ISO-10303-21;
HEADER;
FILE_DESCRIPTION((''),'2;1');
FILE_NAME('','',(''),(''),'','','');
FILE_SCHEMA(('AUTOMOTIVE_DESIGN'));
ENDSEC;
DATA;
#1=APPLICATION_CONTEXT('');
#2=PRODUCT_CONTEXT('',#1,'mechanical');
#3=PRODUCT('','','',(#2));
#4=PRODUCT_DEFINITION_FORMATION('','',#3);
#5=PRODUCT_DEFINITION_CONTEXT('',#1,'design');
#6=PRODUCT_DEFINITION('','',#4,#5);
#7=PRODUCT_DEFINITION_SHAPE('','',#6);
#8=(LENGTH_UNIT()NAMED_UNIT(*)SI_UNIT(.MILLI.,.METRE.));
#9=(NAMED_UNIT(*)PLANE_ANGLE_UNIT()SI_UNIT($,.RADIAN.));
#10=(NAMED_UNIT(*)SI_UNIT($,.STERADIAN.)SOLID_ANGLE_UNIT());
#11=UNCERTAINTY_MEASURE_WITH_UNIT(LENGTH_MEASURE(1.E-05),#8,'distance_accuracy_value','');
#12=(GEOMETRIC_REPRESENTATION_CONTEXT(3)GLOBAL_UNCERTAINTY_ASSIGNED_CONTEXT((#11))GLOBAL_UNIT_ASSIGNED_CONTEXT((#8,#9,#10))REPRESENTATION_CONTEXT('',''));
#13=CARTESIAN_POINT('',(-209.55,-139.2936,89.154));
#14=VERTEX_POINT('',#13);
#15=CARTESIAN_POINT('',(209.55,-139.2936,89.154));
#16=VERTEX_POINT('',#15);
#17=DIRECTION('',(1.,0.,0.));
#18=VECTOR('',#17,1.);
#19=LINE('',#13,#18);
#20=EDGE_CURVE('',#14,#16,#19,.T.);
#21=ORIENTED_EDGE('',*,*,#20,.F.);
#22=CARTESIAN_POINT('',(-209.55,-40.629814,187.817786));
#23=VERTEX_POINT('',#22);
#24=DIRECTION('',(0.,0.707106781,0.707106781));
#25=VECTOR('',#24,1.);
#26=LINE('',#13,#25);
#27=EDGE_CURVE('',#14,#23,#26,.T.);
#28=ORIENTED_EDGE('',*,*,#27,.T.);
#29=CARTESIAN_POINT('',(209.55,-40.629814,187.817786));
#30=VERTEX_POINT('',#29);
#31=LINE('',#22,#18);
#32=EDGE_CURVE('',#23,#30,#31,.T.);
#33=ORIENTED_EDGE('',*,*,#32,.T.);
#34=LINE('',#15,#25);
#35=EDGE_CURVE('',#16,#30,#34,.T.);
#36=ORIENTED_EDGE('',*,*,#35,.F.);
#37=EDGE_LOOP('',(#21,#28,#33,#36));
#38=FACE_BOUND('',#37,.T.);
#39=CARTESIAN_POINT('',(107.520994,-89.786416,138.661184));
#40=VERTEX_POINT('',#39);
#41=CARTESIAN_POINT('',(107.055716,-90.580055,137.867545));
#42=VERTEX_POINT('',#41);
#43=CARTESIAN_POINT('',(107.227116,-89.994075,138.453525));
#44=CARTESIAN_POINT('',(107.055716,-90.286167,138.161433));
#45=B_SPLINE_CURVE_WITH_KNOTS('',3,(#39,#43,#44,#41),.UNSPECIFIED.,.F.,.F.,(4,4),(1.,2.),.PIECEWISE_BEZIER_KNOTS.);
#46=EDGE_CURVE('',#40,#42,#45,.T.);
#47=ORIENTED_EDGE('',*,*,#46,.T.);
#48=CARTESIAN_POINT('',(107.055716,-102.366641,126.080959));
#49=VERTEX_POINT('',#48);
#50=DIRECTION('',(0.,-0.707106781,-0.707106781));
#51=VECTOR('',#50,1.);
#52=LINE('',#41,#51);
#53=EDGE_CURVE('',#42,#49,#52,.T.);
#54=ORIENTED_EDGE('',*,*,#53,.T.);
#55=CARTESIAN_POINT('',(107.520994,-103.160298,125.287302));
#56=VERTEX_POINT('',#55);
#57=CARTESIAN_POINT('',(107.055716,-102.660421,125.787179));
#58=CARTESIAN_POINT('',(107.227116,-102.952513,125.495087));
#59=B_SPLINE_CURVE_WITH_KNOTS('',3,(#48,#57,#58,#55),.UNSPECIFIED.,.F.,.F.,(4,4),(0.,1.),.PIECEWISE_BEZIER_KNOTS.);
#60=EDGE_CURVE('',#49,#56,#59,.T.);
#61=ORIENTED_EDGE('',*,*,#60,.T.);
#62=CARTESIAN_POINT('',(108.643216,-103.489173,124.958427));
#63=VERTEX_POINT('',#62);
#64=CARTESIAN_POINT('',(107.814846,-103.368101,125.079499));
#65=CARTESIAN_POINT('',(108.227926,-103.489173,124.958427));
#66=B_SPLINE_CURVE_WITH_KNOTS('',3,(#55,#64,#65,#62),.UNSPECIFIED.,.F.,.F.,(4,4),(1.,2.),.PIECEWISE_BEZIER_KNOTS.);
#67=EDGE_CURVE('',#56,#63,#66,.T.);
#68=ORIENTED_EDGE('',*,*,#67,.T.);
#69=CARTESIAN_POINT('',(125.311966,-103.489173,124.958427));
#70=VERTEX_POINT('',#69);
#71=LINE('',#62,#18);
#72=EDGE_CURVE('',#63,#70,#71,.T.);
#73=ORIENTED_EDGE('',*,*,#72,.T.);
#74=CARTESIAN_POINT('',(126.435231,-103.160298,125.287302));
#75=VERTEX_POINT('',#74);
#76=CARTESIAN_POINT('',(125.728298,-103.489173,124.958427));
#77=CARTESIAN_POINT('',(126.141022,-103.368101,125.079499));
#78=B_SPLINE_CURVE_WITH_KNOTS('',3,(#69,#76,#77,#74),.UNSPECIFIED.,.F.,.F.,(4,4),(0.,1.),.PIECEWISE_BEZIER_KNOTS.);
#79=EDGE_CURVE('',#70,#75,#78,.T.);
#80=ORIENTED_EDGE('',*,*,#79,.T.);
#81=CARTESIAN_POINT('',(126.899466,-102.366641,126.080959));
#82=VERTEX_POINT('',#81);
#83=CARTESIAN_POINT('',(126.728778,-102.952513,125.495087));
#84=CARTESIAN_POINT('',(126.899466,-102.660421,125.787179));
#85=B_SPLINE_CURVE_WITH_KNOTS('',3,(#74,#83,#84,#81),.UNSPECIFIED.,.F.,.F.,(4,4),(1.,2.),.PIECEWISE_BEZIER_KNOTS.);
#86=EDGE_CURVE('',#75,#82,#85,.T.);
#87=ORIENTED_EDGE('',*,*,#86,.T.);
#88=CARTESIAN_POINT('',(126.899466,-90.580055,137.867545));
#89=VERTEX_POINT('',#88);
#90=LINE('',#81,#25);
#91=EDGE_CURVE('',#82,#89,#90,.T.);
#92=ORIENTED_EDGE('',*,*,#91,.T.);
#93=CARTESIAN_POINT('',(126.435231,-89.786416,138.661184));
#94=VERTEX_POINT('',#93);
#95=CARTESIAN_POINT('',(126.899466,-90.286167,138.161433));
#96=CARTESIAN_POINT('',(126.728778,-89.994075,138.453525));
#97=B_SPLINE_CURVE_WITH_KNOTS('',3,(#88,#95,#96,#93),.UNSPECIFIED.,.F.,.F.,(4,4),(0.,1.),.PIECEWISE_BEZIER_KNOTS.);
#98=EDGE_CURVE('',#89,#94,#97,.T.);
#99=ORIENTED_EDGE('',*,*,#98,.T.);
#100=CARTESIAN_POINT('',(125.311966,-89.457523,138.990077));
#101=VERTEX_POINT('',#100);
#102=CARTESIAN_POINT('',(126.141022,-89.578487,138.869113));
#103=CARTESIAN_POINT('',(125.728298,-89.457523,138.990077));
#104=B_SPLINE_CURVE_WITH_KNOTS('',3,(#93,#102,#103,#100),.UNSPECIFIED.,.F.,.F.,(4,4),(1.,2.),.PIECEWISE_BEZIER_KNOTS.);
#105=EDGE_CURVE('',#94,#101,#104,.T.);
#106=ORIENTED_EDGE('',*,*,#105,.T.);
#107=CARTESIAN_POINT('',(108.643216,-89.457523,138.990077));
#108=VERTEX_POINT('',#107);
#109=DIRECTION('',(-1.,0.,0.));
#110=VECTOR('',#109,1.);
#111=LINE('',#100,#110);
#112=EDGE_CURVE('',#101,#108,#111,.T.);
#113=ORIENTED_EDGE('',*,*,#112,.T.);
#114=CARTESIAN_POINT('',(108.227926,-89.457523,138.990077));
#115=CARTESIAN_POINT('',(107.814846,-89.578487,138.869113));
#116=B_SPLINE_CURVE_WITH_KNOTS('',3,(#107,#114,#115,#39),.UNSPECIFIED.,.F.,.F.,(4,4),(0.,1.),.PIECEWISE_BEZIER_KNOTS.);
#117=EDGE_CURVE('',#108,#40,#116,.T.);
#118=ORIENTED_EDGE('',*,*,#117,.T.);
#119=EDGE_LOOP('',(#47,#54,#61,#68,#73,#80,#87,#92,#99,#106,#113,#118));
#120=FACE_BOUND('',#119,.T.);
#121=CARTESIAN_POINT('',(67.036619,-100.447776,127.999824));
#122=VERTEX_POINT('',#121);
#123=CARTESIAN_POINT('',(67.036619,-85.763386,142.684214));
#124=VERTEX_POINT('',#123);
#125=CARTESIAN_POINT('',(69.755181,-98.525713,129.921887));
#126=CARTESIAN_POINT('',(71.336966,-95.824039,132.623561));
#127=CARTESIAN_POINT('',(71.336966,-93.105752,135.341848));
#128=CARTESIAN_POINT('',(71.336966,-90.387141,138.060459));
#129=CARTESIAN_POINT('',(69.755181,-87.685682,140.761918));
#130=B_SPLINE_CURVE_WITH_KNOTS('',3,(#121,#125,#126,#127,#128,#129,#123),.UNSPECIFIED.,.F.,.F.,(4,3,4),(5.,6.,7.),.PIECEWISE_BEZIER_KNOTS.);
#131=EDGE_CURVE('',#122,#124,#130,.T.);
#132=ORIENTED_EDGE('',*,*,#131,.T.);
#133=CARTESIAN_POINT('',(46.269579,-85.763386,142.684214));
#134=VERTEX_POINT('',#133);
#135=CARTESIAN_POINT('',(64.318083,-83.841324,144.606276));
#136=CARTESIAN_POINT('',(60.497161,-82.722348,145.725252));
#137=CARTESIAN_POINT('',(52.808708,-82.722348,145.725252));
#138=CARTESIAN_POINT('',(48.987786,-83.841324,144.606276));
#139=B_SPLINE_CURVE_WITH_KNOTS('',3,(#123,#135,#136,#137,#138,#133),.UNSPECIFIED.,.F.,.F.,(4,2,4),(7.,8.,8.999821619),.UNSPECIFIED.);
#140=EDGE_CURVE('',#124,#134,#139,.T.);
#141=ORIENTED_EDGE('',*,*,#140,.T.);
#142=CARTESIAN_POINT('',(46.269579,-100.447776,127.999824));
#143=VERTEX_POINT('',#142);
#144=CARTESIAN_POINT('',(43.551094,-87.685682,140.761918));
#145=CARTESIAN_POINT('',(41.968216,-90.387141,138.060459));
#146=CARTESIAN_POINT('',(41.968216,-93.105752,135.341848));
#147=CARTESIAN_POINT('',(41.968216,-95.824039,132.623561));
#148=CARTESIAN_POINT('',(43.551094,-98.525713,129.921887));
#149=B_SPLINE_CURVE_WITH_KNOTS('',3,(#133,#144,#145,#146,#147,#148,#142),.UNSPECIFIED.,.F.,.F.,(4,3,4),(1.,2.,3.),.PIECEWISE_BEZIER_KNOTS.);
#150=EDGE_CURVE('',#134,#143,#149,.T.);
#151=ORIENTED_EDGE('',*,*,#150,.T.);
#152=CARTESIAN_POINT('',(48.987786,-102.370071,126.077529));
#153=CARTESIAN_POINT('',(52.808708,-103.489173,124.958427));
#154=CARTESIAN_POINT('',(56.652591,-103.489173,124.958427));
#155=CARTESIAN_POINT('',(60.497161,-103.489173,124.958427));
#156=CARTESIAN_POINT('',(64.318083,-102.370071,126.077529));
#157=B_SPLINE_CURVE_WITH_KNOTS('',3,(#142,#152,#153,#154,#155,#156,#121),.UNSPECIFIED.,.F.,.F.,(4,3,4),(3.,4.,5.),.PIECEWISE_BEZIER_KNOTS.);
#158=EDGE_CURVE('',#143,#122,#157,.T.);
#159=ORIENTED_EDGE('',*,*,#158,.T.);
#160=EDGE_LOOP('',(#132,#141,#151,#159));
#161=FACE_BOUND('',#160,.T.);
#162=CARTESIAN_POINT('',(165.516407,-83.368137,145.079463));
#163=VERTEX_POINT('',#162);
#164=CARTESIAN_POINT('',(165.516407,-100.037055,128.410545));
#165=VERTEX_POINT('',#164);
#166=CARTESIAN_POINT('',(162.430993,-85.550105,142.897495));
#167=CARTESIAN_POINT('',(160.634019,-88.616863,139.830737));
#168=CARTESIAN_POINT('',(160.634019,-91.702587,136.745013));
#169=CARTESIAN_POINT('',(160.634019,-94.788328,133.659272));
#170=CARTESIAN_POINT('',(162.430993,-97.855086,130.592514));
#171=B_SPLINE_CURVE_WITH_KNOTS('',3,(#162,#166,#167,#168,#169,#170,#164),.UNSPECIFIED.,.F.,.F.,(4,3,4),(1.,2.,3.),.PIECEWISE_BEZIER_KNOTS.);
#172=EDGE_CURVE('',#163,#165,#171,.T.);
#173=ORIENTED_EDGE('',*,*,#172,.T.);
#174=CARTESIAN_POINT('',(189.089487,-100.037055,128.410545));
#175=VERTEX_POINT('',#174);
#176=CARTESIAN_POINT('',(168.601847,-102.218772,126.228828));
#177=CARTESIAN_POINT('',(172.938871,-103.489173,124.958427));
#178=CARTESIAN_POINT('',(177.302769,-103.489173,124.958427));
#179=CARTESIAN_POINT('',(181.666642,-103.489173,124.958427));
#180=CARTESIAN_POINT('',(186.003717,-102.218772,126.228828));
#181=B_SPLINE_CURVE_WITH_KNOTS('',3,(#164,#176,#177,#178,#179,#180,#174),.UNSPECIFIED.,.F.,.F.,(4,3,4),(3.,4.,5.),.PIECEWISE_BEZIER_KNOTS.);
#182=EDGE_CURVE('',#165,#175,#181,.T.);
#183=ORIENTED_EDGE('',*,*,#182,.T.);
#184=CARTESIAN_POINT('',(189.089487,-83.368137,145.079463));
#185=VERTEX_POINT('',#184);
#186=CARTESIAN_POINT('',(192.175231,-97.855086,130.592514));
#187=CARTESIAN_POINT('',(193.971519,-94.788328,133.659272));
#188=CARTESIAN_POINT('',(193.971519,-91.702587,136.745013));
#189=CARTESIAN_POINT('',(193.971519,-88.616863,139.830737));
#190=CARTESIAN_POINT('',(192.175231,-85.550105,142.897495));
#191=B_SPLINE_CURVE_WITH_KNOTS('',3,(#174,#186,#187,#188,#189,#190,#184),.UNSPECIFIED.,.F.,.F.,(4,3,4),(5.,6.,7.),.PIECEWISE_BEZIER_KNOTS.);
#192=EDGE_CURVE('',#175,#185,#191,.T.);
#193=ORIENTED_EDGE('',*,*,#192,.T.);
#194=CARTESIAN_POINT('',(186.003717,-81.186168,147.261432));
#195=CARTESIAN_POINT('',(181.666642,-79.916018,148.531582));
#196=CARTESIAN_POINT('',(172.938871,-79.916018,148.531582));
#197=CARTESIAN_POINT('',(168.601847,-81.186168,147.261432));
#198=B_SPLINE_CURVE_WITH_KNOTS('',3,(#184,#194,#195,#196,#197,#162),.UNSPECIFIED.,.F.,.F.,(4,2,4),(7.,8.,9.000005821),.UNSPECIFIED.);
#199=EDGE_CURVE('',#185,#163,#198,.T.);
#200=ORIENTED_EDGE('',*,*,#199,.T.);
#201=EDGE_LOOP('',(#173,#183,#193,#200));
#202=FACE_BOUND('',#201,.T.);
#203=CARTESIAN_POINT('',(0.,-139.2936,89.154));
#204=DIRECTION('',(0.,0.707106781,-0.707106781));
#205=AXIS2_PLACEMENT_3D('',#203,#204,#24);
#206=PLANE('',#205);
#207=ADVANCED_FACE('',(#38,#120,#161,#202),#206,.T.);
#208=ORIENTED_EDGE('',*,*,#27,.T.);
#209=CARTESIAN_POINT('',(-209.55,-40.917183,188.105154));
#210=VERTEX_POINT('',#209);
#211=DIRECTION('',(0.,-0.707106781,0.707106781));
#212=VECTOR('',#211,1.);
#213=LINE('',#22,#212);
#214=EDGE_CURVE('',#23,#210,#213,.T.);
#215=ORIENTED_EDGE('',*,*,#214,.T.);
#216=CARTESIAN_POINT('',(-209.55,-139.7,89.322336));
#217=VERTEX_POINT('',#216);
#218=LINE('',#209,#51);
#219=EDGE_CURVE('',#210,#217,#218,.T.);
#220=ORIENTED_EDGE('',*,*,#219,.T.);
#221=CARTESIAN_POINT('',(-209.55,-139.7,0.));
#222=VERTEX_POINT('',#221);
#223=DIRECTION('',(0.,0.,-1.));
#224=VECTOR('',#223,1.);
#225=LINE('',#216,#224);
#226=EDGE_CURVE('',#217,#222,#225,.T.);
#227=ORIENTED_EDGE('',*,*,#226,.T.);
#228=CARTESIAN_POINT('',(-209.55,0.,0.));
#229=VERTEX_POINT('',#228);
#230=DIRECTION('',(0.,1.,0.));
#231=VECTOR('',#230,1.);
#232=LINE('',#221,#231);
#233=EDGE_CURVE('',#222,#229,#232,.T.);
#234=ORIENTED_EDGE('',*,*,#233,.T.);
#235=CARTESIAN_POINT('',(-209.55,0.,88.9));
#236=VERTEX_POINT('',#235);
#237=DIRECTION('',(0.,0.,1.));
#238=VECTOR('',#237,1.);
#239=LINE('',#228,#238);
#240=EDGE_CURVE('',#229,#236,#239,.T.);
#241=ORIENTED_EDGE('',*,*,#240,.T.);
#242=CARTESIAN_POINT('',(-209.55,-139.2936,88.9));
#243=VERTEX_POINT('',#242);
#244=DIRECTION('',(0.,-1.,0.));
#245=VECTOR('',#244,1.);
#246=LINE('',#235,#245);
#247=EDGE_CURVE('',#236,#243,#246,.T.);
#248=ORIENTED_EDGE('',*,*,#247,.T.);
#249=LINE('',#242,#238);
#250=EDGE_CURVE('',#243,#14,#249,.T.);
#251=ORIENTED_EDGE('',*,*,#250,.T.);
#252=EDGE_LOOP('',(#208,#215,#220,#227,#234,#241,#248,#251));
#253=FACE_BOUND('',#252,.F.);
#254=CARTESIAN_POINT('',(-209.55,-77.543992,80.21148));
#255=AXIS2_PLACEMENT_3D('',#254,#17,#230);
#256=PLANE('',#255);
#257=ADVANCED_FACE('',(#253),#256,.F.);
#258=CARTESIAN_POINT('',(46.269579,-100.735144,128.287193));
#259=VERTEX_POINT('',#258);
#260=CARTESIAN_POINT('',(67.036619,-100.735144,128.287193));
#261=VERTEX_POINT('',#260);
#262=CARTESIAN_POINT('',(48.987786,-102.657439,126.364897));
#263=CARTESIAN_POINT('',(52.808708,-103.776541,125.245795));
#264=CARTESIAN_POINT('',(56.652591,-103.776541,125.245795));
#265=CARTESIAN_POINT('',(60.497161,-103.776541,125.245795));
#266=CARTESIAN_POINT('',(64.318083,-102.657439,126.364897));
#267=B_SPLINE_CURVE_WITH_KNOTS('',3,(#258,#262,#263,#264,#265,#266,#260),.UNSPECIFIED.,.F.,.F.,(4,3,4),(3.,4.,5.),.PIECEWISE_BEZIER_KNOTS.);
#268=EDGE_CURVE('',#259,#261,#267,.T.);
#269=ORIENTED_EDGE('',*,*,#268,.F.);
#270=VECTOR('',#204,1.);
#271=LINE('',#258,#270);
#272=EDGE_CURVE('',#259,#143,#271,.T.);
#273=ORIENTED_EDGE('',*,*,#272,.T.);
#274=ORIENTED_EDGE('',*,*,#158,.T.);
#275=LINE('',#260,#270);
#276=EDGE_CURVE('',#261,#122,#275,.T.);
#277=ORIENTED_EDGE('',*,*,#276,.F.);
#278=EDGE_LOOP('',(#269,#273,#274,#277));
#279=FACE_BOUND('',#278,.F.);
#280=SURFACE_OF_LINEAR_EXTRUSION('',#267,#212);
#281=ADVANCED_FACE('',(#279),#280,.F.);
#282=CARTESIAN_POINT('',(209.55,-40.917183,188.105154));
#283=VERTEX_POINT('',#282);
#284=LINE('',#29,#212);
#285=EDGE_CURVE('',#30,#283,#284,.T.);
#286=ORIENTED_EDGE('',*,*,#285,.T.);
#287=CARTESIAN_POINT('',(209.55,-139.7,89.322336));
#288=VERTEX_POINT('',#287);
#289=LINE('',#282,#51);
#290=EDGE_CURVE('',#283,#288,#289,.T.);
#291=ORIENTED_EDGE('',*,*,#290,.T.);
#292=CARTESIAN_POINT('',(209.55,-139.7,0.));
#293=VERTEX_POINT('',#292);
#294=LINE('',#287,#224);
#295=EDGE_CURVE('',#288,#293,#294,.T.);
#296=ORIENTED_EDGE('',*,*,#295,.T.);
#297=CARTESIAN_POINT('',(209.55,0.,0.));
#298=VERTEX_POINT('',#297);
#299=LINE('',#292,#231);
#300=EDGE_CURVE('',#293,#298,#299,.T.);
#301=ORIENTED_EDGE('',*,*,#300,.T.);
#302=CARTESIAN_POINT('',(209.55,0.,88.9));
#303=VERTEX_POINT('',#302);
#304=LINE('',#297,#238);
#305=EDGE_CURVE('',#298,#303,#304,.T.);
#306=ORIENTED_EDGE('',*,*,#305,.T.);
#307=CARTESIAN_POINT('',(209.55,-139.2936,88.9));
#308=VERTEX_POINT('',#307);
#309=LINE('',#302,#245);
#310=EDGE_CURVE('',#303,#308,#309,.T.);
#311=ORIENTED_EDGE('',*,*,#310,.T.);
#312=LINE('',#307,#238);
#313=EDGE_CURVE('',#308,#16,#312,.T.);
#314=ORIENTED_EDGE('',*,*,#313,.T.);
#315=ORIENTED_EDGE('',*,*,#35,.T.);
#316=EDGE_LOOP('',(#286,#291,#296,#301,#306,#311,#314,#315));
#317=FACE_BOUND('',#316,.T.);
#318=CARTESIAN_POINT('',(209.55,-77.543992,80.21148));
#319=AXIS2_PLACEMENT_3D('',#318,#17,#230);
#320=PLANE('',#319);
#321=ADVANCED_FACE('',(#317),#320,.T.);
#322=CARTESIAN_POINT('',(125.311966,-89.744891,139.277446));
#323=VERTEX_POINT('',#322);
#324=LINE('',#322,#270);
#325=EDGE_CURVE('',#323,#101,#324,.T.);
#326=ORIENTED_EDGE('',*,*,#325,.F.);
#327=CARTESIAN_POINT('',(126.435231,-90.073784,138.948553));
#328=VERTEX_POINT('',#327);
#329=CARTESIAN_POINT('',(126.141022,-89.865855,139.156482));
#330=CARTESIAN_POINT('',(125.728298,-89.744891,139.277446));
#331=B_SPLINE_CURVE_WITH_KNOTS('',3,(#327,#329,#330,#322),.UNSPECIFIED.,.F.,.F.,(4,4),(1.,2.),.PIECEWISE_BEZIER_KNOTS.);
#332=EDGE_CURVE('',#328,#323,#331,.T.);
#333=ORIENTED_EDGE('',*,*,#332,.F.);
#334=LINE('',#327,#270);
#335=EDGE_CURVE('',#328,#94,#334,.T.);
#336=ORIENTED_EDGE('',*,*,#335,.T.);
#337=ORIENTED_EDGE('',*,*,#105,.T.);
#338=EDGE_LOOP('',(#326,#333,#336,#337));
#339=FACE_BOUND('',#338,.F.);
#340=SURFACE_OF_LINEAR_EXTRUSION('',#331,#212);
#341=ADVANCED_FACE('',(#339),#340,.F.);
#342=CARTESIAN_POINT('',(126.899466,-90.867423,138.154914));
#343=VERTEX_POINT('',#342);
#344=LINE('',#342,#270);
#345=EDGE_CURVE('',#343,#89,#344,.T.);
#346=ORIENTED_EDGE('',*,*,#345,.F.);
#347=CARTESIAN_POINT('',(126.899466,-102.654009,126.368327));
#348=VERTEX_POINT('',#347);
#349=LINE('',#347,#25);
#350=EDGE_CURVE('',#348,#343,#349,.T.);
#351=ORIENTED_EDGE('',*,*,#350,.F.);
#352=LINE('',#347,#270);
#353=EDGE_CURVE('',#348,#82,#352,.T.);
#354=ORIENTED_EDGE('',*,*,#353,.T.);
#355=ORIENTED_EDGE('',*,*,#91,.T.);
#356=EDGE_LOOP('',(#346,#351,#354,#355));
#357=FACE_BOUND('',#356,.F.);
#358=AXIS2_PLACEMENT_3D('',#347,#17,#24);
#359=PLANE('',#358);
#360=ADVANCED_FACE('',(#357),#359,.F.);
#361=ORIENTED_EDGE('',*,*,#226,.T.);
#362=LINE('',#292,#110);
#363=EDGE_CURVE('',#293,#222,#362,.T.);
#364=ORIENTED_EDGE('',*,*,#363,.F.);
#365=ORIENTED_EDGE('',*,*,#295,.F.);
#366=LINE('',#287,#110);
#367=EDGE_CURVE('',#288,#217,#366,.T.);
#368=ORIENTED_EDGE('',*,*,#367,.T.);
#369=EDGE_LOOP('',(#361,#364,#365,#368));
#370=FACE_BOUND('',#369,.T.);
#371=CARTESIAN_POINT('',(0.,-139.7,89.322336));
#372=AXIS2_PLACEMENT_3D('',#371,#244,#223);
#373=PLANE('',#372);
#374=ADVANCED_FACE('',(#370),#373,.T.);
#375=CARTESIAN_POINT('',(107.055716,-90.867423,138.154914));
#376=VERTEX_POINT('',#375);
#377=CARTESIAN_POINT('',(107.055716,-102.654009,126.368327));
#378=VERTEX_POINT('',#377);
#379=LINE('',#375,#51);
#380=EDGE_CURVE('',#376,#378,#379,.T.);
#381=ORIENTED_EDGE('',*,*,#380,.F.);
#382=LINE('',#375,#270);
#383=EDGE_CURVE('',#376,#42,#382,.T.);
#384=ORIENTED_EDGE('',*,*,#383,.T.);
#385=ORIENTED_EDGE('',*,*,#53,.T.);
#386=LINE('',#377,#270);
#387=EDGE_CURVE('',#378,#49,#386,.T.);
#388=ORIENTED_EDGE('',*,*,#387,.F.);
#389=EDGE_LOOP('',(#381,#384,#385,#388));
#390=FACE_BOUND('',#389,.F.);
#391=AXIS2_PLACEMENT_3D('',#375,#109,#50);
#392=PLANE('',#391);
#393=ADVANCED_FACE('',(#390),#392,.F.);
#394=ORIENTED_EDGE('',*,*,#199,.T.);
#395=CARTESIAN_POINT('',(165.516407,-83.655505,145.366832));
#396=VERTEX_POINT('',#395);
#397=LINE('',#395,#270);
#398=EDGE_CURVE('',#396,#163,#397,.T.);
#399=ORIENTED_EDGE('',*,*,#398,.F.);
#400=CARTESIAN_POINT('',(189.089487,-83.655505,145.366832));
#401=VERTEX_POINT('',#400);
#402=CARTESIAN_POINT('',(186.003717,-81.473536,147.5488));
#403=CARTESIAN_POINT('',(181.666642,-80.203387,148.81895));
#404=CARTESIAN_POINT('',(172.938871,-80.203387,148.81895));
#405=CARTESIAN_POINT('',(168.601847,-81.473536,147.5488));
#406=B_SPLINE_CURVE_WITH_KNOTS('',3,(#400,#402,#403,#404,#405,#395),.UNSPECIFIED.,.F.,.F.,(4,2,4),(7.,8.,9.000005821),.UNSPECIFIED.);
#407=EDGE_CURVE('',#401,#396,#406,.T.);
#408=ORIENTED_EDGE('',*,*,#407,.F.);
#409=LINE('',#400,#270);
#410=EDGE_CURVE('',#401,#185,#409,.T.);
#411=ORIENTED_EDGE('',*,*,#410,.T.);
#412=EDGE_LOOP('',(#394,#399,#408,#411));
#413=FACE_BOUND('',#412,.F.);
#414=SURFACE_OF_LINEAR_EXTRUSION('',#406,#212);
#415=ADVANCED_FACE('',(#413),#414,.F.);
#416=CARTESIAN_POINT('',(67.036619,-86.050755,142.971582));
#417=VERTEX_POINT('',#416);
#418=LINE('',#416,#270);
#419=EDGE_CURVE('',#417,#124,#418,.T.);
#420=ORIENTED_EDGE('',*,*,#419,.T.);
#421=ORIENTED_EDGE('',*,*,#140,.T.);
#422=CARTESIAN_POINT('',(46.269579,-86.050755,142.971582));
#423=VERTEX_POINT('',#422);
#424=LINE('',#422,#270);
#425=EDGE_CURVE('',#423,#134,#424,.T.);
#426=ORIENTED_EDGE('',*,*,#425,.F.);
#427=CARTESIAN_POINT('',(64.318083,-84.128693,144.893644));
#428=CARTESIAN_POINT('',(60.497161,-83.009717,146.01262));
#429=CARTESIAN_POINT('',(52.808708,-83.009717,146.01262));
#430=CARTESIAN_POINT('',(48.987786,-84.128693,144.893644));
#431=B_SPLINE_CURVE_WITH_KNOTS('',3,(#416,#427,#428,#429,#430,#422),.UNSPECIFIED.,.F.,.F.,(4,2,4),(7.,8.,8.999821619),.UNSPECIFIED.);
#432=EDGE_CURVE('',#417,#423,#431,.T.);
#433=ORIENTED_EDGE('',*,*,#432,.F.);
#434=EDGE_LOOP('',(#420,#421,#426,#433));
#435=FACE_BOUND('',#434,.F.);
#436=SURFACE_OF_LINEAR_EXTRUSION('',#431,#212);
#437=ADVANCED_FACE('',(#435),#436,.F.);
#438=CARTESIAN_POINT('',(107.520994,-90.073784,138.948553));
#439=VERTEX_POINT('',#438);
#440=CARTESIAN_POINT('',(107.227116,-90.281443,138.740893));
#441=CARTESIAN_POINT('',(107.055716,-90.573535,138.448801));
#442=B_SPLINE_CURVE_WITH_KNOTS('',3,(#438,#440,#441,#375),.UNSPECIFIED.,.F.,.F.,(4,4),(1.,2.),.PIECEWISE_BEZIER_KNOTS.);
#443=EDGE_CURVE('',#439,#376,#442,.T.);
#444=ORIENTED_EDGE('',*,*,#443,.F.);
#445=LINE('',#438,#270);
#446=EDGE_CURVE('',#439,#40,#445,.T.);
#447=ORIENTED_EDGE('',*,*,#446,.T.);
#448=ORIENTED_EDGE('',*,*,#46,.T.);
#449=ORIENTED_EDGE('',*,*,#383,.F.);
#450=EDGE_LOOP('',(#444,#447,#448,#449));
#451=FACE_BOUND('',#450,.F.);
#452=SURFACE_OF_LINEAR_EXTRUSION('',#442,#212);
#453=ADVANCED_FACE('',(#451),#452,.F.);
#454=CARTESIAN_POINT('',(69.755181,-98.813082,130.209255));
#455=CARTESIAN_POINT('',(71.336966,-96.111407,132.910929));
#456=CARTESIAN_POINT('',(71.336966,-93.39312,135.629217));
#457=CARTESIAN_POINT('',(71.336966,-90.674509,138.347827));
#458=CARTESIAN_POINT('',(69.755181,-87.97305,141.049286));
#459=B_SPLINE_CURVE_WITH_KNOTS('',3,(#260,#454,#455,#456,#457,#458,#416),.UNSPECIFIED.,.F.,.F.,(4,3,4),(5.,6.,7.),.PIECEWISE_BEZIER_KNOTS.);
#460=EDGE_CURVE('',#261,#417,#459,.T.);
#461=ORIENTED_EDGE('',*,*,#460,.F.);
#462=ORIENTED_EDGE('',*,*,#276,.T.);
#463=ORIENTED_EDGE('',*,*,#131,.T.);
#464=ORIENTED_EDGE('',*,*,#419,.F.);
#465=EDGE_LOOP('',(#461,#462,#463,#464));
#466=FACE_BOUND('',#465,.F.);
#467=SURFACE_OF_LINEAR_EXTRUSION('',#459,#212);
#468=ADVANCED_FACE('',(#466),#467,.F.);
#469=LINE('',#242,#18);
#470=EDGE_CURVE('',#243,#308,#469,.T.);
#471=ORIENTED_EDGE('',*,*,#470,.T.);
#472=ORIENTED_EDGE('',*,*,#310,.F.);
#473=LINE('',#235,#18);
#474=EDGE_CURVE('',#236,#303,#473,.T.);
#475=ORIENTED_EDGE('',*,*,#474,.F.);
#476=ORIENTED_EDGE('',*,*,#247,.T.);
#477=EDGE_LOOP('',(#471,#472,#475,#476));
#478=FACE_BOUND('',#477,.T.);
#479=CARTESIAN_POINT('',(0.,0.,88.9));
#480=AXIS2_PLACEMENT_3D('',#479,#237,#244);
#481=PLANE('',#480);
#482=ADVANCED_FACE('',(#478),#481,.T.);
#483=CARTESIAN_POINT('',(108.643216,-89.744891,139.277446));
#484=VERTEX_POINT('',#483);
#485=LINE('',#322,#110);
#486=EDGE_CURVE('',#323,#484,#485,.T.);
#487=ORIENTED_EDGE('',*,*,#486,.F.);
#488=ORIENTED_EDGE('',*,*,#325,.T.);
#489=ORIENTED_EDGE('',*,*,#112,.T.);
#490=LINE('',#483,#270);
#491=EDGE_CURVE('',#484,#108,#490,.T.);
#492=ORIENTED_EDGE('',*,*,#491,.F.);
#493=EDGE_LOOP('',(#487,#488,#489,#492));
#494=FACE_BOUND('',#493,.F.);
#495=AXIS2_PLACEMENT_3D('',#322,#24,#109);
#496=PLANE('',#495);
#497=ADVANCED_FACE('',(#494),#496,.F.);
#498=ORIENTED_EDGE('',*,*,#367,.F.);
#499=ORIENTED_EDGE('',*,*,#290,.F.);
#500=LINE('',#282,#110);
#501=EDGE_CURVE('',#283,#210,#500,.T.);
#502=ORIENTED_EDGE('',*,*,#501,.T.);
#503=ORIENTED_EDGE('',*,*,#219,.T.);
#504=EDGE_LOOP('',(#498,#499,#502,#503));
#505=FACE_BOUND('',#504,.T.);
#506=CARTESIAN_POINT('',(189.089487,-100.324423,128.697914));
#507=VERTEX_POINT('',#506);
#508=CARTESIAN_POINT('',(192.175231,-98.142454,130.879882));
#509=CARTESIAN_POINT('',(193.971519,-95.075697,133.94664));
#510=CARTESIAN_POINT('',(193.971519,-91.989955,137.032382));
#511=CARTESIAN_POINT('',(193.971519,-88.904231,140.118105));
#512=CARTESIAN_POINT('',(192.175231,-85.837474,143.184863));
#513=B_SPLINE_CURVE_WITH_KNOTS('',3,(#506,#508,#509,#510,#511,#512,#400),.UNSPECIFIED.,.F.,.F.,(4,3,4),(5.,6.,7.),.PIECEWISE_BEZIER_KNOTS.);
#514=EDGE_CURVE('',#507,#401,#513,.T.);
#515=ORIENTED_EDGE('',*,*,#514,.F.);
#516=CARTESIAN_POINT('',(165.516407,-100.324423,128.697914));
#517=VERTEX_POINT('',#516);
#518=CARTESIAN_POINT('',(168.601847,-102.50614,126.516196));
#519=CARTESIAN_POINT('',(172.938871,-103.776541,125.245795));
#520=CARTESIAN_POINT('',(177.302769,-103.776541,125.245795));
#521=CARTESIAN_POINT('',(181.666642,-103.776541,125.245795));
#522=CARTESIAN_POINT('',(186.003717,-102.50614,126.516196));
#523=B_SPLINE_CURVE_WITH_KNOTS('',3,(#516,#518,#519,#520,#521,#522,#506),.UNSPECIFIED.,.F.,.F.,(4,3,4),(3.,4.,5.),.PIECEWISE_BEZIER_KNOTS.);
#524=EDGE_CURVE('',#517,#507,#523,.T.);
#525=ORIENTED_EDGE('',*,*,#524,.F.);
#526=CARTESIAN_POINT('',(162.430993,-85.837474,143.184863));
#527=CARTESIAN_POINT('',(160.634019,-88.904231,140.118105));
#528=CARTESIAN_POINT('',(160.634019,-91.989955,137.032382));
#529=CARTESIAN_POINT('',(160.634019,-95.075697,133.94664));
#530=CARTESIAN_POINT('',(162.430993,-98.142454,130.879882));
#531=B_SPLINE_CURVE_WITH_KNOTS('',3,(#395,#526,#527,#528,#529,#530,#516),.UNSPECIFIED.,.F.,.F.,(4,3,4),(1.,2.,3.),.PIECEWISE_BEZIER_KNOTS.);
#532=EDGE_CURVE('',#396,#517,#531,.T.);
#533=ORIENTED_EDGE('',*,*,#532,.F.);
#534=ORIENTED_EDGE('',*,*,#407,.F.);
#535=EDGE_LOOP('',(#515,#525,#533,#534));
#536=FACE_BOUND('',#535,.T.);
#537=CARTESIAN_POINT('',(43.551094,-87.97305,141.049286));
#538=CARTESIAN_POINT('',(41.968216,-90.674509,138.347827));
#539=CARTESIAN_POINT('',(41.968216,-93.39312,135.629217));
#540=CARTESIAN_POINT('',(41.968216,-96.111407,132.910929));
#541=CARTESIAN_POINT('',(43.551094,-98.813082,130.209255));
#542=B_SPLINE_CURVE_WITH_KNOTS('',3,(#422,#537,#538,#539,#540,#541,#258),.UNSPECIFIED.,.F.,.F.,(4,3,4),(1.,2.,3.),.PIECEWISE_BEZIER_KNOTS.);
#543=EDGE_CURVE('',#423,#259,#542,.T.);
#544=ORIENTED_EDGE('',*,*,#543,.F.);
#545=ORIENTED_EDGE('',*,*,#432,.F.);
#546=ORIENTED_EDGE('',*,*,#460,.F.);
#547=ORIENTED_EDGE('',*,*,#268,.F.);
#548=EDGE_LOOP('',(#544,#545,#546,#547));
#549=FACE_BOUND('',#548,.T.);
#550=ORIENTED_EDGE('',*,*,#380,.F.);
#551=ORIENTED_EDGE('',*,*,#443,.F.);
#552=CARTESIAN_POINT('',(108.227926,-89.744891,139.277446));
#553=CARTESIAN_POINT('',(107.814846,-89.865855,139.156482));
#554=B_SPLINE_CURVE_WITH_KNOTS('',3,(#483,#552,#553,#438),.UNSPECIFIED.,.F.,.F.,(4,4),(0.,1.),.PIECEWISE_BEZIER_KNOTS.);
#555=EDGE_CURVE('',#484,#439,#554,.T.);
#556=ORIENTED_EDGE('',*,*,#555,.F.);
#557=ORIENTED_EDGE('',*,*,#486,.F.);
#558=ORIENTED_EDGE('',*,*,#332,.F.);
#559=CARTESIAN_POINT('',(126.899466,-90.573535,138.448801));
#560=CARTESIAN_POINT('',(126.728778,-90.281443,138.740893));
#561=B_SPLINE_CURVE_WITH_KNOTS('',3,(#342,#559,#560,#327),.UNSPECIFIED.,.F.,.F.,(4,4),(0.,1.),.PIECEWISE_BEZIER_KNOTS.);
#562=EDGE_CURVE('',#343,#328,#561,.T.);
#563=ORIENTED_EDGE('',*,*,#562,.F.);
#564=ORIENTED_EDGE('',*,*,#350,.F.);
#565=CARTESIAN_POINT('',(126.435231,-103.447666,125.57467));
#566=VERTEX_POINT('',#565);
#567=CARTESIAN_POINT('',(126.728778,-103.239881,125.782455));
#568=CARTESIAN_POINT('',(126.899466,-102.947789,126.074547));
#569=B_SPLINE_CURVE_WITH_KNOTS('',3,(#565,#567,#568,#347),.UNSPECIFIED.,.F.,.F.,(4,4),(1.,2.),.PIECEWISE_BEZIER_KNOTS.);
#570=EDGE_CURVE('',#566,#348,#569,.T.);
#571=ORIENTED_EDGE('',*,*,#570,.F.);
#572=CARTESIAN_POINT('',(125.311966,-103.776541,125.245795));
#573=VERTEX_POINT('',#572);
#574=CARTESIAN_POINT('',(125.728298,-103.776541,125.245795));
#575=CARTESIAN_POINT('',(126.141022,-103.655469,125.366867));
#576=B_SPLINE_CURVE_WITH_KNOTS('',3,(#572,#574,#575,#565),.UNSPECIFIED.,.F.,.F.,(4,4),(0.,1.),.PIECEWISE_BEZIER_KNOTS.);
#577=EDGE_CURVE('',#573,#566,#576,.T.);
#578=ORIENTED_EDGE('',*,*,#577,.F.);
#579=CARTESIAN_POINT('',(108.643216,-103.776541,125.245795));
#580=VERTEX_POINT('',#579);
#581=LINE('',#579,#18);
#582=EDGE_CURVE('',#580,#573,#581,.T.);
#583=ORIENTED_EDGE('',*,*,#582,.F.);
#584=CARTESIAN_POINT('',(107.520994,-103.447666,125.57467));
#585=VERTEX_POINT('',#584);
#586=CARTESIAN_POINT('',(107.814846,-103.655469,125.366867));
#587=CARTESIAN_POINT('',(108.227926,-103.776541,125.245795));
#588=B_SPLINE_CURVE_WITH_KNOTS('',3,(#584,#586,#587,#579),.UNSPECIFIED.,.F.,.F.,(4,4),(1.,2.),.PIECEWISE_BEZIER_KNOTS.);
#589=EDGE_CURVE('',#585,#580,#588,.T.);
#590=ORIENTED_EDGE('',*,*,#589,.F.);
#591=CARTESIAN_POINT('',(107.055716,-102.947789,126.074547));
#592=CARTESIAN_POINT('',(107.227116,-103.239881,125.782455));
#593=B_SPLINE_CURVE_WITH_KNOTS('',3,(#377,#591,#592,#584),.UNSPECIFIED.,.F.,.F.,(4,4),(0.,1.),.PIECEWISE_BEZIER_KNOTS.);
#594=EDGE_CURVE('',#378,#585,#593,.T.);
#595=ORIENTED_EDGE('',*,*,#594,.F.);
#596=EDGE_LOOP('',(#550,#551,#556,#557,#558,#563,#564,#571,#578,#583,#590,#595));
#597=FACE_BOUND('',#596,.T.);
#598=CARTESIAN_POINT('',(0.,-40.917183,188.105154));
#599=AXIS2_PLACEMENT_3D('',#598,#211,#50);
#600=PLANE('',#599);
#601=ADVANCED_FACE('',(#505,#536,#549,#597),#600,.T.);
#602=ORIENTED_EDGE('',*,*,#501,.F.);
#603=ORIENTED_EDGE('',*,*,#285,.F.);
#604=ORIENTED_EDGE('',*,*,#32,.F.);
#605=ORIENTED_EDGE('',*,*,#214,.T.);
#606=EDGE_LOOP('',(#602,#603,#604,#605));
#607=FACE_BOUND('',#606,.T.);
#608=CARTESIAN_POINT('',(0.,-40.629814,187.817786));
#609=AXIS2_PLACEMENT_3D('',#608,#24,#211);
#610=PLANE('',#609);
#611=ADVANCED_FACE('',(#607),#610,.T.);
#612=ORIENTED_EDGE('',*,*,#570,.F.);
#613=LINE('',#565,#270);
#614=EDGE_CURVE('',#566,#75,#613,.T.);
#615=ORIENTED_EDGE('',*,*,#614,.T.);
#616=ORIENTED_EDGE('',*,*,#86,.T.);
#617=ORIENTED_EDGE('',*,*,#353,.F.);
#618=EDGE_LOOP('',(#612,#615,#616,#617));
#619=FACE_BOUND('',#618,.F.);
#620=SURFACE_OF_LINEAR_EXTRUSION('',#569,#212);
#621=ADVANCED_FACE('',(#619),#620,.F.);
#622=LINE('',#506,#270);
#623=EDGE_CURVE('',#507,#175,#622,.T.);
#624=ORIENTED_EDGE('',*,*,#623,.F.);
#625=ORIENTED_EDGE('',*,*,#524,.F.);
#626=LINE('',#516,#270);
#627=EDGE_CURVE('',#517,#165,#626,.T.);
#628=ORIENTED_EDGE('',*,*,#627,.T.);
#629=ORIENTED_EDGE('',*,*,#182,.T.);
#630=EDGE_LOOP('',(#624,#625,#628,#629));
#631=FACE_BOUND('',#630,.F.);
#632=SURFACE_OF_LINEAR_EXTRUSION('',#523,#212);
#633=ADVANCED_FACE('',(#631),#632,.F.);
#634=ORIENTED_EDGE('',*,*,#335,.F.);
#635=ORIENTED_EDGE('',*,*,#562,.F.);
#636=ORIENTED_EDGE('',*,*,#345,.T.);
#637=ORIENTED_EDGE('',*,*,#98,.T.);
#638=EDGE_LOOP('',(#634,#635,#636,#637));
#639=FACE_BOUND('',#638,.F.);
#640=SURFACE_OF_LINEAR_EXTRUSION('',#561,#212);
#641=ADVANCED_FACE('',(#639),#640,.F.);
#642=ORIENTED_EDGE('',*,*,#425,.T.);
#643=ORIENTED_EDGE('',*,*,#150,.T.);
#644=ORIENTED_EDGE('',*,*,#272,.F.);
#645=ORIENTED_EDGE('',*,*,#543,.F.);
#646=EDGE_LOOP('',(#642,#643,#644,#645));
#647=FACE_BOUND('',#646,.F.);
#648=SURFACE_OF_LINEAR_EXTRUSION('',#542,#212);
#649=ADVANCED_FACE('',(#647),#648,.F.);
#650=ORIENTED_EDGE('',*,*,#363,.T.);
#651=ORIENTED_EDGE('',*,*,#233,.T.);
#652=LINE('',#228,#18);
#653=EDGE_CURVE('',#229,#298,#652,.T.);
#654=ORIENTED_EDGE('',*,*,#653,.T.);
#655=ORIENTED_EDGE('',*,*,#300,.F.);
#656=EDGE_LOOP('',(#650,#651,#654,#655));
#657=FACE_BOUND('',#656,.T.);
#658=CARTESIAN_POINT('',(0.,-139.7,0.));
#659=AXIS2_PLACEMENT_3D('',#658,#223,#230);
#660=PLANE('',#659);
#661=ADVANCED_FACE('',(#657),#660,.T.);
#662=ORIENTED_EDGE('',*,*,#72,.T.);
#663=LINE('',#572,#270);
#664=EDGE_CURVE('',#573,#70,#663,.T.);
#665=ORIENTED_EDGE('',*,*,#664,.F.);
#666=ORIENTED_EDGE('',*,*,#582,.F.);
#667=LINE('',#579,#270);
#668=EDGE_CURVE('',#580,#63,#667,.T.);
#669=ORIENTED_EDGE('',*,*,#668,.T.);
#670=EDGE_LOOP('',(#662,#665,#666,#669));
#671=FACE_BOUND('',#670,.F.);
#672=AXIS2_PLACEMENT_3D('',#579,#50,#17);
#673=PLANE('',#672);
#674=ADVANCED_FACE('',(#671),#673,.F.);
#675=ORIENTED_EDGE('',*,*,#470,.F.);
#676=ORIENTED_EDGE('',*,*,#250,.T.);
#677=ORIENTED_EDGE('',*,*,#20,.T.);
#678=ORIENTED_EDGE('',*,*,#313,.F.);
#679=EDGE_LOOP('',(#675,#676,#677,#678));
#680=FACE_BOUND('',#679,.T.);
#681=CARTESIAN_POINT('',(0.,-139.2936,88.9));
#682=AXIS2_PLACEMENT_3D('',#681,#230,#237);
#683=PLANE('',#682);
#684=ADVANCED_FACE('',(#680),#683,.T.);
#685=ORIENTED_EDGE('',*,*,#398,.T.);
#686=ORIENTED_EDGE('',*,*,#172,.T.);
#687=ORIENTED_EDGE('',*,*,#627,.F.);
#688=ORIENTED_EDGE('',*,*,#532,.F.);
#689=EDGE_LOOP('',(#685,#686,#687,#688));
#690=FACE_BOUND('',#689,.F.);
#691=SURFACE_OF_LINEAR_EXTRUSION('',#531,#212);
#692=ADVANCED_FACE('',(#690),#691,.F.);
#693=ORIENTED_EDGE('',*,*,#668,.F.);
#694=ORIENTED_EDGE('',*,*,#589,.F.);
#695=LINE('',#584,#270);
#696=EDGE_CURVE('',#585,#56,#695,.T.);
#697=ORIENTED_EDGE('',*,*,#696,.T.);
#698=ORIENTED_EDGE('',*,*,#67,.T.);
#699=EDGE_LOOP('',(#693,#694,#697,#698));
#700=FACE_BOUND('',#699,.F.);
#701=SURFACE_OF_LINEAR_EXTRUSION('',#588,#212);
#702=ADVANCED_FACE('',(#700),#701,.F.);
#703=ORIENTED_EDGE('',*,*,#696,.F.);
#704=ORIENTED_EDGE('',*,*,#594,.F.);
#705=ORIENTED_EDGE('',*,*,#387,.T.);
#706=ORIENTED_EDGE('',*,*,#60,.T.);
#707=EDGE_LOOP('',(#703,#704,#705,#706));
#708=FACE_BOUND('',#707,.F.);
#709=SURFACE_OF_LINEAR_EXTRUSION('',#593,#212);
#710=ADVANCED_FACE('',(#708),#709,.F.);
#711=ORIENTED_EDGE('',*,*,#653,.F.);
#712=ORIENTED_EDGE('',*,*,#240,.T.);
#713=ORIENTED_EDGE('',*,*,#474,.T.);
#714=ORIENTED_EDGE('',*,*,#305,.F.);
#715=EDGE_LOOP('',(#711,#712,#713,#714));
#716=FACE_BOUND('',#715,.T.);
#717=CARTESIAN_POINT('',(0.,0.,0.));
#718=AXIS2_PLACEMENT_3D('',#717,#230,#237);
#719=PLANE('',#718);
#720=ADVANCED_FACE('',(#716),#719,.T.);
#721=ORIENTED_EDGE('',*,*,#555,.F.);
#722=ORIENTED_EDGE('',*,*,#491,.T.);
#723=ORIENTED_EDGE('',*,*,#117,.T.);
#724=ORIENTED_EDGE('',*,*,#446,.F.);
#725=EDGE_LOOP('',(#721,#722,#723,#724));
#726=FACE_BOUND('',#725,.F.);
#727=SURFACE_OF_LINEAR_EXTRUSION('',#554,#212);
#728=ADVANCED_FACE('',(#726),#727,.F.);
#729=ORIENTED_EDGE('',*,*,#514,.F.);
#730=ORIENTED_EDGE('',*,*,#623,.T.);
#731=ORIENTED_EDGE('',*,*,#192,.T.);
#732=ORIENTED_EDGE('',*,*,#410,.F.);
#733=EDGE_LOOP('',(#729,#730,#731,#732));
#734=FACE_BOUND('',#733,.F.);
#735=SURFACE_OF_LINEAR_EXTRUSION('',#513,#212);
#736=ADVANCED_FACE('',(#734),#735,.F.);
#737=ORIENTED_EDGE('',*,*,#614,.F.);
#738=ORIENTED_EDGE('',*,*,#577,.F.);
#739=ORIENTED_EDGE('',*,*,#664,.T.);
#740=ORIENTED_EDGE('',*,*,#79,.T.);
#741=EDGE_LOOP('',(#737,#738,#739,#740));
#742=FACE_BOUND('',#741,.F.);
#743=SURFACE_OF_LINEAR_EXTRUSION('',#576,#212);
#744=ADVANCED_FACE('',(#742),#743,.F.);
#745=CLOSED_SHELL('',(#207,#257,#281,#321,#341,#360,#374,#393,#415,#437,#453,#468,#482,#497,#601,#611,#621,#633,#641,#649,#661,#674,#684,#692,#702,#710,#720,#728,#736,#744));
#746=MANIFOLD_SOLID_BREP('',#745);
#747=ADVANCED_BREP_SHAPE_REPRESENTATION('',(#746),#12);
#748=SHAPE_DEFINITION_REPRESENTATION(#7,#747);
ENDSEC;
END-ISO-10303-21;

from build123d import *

# Parameters (mm, degrees)
F1_DEPTH = 209.55
F3_DEPTH = 0.4064


# Not quite as in the source:
# - the dataset's text gives a spline's control points without its knots; the knots are read off the source's solid


with BuildPart() as f1:
    # F0 (on Right) → F1 (new body, symmetric)
    with BuildSketch(Plane.YZ):
        Polygon((-139.7, 0), (0, 0), (0, 88.9), (-139.2936, 88.9), (-139.2936, 89.154), (-40.6298144724, 187.8177855276), (-40.9171826682, 188.1051537235), (-139.7, 89.3223363917), align=None)
    extrude(amount=F1_DEPTH, both=True)

    # F2 (on face) → F3 (cut, through all)
    with BuildSketch(Plane(origin=(0, -114.5111681959, 114.5111681959), x_dir=(1, 0, 0), z_dir=(0, -0.7071067812, 0.7071067812))):
        with BuildLine():
            add(Edge.make_bspline(
                [(107.5209936486, 34.5596805655), (107.2271156486, 34.2660057655), (107.0557164486, 33.8529255655), (107.0557164486, 33.4373053655)],
                knots=[1, 1, 1, 1, 2, 2, 2, 2], degree=3))
            Line((107.0557164486, 33.4373053655), (107.0557164486, 16.7685553655))
            add(Edge.make_bspline(
                [(107.0557164486, 16.7685553655), (107.0557164486, 16.3530875655), (107.2271156486, 15.9400073655), (107.5209936486, 15.6461547655)],
                knots=[0, 0, 0, 0, 1, 1, 1, 1], degree=3))
            add(Edge.make_bspline(
                [(107.5209936486, 15.6461547655), (107.8148462486, 15.3522767655), (108.2279264486, 15.1810553655), (108.6432164486, 15.1810553655)],
                knots=[1, 1, 1, 1, 2, 2, 2, 2], degree=3))
            Line((108.6432164486, 15.1810553655), (125.3119664486, 15.1810553655))
            add(Edge.make_bspline(
                [(125.3119664486, 15.1810553655), (125.7282978486, 15.1810553655), (126.1410224486, 15.3522767655), (126.4352306486, 15.6461547655)],
                knots=[0, 0, 0, 0, 1, 1, 1, 1], degree=3))
            add(Edge.make_bspline(
                [(126.4352306486, 15.6461547655), (126.7287784486, 15.9400073655), (126.8994664486, 16.3530875655), (126.8994664486, 16.7685553655)],
                knots=[1, 1, 1, 1, 2, 2, 2, 2], degree=3))
            Line((126.8994664486, 16.7685553655), (126.8994664486, 33.4373053655))
            add(Edge.make_bspline(
                [(126.8994664486, 33.4373053655), (126.8994664486, 33.8529255655), (126.7287784486, 34.2660057655), (126.4352306486, 34.5596805655)],
                knots=[0, 0, 0, 0, 1, 1, 1, 1], degree=3))
            add(Edge.make_bspline(
                [(126.4352306486, 34.5596805655), (126.1410224486, 34.8537363655), (125.7282978486, 35.0248053655), (125.3119664486, 35.0248053655)],
                knots=[1, 1, 1, 1, 2, 2, 2, 2], degree=3))
            Line((125.3119664486, 35.0248053655), (108.6432164486, 35.0248053655))
            add(Edge.make_bspline(
                [(108.6432164486, 35.0248053655), (108.2279264486, 35.0248053655), (107.8148462486, 34.8537363655), (107.5209936486, 34.5596805655)],
                knots=[0, 0, 0, 0, 1, 1, 1, 1], degree=3))
        make_face()
        with BuildLine():
            add(Edge.make_bspline(
                [(67.0366194486, 40.2491027655), (64.3180828486, 42.9673091655), (60.4971608486, 44.5497799655), (56.6525914486, 44.5497799655)],
                knots=[7, 7, 7, 7, 8, 8, 8, 8], degree=3))
            add(Edge.make_bspline(
                [(56.6525914486, 44.5497799655), (52.8087078486, 44.5497799655), (48.9877858486, 42.9673091655), (46.2695794486, 40.2491027655)],
                knots=[0, 0, 0, 0, 1, 1, 1, 1], degree=3))
            add(Edge.make_bspline(
                [(46.2695794486, 40.2491027655), (43.5510936486, 37.5305661655), (41.9682164486, 33.7101267655), (41.9682164486, 29.8654303655), (41.9682164486, 26.0211911655), (43.5510936486, 22.2004469655), (46.2695794486, 19.4822405655)],
                knots=[1, 1, 1, 1, 2, 2, 2, 3, 3, 3, 3], degree=3))
            add(Edge.make_bspline(
                [(46.2695794486, 19.4822405655), (48.9877858486, 16.7637039655), (52.8087078486, 15.1810553655), (56.6525914486, 15.1810553655), (60.4971608486, 15.1810553655), (64.3180828486, 16.7637039655), (67.0366194486, 19.4822405655)],
                knots=[3, 3, 3, 3, 4, 4, 4, 5, 5, 5, 5], degree=3))
            add(Edge.make_bspline(
                [(67.0366194486, 19.4822405655), (69.7551814486, 22.2004469655), (71.3369664486, 26.0211911655), (71.3369664486, 29.8654303655), (71.3369664486, 33.7101267655), (69.7551814486, 37.5305661655), (67.0366194486, 40.2491027655)],
                knots=[5, 5, 5, 5, 6, 6, 6, 7, 7, 7, 7], degree=3))
        make_face()
        with BuildLine():
            add(Edge.make_bspline(
                [(189.0894868486, 43.6364975655), (186.0037170486, 46.7222673655), (181.6666416486, 48.5185299655), (177.3027692486, 48.5185299655)],
                knots=[7, 7, 7, 7, 8, 8, 8, 8], degree=3))
            add(Edge.make_bspline(
                [(177.3027692486, 48.5185299655), (172.9388714486, 48.5185299655), (168.6018468486, 46.7222673655), (165.5164072486, 43.6364975655)],
                knots=[0, 0, 0, 0, 1, 1, 1, 1], degree=3))
            add(Edge.make_bspline(
                [(165.5164072486, 43.6364975655), (162.4309930486, 40.5507277655), (160.6340192486, 36.2136777655), (160.6340192486, 31.8498053655), (160.6340192486, 27.4859075655), (162.4309930486, 23.1488575655), (165.5164072486, 20.0630877655)],
                knots=[1, 1, 1, 1, 2, 2, 2, 3, 3, 3, 3], degree=3))
            add(Edge.make_bspline(
                [(165.5164072486, 20.0630877655), (168.6018468486, 16.9776735655), (172.9388714486, 15.1810553655), (177.3027692486, 15.1810553655), (181.6666416486, 15.1810553655), (186.0037170486, 16.9776735655), (189.0894868486, 20.0630877655)],
                knots=[3, 3, 3, 3, 4, 4, 4, 5, 5, 5, 5], degree=3))
            add(Edge.make_bspline(
                [(189.0894868486, 20.0630877655), (192.1752312486, 23.1488575655), (193.9715192486, 27.4859075655), (193.9715192486, 31.8498053655), (193.9715192486, 36.2136777655), (192.1752312486, 40.5507277655), (189.0894868486, 43.6364975655)],
                knots=[5, 5, 5, 5, 6, 6, 6, 7, 7, 7, 7], degree=3))
        make_face()
    extrude(amount=-F3_DEPTH, mode=Mode.SUBTRACT)


solid = f1.part
